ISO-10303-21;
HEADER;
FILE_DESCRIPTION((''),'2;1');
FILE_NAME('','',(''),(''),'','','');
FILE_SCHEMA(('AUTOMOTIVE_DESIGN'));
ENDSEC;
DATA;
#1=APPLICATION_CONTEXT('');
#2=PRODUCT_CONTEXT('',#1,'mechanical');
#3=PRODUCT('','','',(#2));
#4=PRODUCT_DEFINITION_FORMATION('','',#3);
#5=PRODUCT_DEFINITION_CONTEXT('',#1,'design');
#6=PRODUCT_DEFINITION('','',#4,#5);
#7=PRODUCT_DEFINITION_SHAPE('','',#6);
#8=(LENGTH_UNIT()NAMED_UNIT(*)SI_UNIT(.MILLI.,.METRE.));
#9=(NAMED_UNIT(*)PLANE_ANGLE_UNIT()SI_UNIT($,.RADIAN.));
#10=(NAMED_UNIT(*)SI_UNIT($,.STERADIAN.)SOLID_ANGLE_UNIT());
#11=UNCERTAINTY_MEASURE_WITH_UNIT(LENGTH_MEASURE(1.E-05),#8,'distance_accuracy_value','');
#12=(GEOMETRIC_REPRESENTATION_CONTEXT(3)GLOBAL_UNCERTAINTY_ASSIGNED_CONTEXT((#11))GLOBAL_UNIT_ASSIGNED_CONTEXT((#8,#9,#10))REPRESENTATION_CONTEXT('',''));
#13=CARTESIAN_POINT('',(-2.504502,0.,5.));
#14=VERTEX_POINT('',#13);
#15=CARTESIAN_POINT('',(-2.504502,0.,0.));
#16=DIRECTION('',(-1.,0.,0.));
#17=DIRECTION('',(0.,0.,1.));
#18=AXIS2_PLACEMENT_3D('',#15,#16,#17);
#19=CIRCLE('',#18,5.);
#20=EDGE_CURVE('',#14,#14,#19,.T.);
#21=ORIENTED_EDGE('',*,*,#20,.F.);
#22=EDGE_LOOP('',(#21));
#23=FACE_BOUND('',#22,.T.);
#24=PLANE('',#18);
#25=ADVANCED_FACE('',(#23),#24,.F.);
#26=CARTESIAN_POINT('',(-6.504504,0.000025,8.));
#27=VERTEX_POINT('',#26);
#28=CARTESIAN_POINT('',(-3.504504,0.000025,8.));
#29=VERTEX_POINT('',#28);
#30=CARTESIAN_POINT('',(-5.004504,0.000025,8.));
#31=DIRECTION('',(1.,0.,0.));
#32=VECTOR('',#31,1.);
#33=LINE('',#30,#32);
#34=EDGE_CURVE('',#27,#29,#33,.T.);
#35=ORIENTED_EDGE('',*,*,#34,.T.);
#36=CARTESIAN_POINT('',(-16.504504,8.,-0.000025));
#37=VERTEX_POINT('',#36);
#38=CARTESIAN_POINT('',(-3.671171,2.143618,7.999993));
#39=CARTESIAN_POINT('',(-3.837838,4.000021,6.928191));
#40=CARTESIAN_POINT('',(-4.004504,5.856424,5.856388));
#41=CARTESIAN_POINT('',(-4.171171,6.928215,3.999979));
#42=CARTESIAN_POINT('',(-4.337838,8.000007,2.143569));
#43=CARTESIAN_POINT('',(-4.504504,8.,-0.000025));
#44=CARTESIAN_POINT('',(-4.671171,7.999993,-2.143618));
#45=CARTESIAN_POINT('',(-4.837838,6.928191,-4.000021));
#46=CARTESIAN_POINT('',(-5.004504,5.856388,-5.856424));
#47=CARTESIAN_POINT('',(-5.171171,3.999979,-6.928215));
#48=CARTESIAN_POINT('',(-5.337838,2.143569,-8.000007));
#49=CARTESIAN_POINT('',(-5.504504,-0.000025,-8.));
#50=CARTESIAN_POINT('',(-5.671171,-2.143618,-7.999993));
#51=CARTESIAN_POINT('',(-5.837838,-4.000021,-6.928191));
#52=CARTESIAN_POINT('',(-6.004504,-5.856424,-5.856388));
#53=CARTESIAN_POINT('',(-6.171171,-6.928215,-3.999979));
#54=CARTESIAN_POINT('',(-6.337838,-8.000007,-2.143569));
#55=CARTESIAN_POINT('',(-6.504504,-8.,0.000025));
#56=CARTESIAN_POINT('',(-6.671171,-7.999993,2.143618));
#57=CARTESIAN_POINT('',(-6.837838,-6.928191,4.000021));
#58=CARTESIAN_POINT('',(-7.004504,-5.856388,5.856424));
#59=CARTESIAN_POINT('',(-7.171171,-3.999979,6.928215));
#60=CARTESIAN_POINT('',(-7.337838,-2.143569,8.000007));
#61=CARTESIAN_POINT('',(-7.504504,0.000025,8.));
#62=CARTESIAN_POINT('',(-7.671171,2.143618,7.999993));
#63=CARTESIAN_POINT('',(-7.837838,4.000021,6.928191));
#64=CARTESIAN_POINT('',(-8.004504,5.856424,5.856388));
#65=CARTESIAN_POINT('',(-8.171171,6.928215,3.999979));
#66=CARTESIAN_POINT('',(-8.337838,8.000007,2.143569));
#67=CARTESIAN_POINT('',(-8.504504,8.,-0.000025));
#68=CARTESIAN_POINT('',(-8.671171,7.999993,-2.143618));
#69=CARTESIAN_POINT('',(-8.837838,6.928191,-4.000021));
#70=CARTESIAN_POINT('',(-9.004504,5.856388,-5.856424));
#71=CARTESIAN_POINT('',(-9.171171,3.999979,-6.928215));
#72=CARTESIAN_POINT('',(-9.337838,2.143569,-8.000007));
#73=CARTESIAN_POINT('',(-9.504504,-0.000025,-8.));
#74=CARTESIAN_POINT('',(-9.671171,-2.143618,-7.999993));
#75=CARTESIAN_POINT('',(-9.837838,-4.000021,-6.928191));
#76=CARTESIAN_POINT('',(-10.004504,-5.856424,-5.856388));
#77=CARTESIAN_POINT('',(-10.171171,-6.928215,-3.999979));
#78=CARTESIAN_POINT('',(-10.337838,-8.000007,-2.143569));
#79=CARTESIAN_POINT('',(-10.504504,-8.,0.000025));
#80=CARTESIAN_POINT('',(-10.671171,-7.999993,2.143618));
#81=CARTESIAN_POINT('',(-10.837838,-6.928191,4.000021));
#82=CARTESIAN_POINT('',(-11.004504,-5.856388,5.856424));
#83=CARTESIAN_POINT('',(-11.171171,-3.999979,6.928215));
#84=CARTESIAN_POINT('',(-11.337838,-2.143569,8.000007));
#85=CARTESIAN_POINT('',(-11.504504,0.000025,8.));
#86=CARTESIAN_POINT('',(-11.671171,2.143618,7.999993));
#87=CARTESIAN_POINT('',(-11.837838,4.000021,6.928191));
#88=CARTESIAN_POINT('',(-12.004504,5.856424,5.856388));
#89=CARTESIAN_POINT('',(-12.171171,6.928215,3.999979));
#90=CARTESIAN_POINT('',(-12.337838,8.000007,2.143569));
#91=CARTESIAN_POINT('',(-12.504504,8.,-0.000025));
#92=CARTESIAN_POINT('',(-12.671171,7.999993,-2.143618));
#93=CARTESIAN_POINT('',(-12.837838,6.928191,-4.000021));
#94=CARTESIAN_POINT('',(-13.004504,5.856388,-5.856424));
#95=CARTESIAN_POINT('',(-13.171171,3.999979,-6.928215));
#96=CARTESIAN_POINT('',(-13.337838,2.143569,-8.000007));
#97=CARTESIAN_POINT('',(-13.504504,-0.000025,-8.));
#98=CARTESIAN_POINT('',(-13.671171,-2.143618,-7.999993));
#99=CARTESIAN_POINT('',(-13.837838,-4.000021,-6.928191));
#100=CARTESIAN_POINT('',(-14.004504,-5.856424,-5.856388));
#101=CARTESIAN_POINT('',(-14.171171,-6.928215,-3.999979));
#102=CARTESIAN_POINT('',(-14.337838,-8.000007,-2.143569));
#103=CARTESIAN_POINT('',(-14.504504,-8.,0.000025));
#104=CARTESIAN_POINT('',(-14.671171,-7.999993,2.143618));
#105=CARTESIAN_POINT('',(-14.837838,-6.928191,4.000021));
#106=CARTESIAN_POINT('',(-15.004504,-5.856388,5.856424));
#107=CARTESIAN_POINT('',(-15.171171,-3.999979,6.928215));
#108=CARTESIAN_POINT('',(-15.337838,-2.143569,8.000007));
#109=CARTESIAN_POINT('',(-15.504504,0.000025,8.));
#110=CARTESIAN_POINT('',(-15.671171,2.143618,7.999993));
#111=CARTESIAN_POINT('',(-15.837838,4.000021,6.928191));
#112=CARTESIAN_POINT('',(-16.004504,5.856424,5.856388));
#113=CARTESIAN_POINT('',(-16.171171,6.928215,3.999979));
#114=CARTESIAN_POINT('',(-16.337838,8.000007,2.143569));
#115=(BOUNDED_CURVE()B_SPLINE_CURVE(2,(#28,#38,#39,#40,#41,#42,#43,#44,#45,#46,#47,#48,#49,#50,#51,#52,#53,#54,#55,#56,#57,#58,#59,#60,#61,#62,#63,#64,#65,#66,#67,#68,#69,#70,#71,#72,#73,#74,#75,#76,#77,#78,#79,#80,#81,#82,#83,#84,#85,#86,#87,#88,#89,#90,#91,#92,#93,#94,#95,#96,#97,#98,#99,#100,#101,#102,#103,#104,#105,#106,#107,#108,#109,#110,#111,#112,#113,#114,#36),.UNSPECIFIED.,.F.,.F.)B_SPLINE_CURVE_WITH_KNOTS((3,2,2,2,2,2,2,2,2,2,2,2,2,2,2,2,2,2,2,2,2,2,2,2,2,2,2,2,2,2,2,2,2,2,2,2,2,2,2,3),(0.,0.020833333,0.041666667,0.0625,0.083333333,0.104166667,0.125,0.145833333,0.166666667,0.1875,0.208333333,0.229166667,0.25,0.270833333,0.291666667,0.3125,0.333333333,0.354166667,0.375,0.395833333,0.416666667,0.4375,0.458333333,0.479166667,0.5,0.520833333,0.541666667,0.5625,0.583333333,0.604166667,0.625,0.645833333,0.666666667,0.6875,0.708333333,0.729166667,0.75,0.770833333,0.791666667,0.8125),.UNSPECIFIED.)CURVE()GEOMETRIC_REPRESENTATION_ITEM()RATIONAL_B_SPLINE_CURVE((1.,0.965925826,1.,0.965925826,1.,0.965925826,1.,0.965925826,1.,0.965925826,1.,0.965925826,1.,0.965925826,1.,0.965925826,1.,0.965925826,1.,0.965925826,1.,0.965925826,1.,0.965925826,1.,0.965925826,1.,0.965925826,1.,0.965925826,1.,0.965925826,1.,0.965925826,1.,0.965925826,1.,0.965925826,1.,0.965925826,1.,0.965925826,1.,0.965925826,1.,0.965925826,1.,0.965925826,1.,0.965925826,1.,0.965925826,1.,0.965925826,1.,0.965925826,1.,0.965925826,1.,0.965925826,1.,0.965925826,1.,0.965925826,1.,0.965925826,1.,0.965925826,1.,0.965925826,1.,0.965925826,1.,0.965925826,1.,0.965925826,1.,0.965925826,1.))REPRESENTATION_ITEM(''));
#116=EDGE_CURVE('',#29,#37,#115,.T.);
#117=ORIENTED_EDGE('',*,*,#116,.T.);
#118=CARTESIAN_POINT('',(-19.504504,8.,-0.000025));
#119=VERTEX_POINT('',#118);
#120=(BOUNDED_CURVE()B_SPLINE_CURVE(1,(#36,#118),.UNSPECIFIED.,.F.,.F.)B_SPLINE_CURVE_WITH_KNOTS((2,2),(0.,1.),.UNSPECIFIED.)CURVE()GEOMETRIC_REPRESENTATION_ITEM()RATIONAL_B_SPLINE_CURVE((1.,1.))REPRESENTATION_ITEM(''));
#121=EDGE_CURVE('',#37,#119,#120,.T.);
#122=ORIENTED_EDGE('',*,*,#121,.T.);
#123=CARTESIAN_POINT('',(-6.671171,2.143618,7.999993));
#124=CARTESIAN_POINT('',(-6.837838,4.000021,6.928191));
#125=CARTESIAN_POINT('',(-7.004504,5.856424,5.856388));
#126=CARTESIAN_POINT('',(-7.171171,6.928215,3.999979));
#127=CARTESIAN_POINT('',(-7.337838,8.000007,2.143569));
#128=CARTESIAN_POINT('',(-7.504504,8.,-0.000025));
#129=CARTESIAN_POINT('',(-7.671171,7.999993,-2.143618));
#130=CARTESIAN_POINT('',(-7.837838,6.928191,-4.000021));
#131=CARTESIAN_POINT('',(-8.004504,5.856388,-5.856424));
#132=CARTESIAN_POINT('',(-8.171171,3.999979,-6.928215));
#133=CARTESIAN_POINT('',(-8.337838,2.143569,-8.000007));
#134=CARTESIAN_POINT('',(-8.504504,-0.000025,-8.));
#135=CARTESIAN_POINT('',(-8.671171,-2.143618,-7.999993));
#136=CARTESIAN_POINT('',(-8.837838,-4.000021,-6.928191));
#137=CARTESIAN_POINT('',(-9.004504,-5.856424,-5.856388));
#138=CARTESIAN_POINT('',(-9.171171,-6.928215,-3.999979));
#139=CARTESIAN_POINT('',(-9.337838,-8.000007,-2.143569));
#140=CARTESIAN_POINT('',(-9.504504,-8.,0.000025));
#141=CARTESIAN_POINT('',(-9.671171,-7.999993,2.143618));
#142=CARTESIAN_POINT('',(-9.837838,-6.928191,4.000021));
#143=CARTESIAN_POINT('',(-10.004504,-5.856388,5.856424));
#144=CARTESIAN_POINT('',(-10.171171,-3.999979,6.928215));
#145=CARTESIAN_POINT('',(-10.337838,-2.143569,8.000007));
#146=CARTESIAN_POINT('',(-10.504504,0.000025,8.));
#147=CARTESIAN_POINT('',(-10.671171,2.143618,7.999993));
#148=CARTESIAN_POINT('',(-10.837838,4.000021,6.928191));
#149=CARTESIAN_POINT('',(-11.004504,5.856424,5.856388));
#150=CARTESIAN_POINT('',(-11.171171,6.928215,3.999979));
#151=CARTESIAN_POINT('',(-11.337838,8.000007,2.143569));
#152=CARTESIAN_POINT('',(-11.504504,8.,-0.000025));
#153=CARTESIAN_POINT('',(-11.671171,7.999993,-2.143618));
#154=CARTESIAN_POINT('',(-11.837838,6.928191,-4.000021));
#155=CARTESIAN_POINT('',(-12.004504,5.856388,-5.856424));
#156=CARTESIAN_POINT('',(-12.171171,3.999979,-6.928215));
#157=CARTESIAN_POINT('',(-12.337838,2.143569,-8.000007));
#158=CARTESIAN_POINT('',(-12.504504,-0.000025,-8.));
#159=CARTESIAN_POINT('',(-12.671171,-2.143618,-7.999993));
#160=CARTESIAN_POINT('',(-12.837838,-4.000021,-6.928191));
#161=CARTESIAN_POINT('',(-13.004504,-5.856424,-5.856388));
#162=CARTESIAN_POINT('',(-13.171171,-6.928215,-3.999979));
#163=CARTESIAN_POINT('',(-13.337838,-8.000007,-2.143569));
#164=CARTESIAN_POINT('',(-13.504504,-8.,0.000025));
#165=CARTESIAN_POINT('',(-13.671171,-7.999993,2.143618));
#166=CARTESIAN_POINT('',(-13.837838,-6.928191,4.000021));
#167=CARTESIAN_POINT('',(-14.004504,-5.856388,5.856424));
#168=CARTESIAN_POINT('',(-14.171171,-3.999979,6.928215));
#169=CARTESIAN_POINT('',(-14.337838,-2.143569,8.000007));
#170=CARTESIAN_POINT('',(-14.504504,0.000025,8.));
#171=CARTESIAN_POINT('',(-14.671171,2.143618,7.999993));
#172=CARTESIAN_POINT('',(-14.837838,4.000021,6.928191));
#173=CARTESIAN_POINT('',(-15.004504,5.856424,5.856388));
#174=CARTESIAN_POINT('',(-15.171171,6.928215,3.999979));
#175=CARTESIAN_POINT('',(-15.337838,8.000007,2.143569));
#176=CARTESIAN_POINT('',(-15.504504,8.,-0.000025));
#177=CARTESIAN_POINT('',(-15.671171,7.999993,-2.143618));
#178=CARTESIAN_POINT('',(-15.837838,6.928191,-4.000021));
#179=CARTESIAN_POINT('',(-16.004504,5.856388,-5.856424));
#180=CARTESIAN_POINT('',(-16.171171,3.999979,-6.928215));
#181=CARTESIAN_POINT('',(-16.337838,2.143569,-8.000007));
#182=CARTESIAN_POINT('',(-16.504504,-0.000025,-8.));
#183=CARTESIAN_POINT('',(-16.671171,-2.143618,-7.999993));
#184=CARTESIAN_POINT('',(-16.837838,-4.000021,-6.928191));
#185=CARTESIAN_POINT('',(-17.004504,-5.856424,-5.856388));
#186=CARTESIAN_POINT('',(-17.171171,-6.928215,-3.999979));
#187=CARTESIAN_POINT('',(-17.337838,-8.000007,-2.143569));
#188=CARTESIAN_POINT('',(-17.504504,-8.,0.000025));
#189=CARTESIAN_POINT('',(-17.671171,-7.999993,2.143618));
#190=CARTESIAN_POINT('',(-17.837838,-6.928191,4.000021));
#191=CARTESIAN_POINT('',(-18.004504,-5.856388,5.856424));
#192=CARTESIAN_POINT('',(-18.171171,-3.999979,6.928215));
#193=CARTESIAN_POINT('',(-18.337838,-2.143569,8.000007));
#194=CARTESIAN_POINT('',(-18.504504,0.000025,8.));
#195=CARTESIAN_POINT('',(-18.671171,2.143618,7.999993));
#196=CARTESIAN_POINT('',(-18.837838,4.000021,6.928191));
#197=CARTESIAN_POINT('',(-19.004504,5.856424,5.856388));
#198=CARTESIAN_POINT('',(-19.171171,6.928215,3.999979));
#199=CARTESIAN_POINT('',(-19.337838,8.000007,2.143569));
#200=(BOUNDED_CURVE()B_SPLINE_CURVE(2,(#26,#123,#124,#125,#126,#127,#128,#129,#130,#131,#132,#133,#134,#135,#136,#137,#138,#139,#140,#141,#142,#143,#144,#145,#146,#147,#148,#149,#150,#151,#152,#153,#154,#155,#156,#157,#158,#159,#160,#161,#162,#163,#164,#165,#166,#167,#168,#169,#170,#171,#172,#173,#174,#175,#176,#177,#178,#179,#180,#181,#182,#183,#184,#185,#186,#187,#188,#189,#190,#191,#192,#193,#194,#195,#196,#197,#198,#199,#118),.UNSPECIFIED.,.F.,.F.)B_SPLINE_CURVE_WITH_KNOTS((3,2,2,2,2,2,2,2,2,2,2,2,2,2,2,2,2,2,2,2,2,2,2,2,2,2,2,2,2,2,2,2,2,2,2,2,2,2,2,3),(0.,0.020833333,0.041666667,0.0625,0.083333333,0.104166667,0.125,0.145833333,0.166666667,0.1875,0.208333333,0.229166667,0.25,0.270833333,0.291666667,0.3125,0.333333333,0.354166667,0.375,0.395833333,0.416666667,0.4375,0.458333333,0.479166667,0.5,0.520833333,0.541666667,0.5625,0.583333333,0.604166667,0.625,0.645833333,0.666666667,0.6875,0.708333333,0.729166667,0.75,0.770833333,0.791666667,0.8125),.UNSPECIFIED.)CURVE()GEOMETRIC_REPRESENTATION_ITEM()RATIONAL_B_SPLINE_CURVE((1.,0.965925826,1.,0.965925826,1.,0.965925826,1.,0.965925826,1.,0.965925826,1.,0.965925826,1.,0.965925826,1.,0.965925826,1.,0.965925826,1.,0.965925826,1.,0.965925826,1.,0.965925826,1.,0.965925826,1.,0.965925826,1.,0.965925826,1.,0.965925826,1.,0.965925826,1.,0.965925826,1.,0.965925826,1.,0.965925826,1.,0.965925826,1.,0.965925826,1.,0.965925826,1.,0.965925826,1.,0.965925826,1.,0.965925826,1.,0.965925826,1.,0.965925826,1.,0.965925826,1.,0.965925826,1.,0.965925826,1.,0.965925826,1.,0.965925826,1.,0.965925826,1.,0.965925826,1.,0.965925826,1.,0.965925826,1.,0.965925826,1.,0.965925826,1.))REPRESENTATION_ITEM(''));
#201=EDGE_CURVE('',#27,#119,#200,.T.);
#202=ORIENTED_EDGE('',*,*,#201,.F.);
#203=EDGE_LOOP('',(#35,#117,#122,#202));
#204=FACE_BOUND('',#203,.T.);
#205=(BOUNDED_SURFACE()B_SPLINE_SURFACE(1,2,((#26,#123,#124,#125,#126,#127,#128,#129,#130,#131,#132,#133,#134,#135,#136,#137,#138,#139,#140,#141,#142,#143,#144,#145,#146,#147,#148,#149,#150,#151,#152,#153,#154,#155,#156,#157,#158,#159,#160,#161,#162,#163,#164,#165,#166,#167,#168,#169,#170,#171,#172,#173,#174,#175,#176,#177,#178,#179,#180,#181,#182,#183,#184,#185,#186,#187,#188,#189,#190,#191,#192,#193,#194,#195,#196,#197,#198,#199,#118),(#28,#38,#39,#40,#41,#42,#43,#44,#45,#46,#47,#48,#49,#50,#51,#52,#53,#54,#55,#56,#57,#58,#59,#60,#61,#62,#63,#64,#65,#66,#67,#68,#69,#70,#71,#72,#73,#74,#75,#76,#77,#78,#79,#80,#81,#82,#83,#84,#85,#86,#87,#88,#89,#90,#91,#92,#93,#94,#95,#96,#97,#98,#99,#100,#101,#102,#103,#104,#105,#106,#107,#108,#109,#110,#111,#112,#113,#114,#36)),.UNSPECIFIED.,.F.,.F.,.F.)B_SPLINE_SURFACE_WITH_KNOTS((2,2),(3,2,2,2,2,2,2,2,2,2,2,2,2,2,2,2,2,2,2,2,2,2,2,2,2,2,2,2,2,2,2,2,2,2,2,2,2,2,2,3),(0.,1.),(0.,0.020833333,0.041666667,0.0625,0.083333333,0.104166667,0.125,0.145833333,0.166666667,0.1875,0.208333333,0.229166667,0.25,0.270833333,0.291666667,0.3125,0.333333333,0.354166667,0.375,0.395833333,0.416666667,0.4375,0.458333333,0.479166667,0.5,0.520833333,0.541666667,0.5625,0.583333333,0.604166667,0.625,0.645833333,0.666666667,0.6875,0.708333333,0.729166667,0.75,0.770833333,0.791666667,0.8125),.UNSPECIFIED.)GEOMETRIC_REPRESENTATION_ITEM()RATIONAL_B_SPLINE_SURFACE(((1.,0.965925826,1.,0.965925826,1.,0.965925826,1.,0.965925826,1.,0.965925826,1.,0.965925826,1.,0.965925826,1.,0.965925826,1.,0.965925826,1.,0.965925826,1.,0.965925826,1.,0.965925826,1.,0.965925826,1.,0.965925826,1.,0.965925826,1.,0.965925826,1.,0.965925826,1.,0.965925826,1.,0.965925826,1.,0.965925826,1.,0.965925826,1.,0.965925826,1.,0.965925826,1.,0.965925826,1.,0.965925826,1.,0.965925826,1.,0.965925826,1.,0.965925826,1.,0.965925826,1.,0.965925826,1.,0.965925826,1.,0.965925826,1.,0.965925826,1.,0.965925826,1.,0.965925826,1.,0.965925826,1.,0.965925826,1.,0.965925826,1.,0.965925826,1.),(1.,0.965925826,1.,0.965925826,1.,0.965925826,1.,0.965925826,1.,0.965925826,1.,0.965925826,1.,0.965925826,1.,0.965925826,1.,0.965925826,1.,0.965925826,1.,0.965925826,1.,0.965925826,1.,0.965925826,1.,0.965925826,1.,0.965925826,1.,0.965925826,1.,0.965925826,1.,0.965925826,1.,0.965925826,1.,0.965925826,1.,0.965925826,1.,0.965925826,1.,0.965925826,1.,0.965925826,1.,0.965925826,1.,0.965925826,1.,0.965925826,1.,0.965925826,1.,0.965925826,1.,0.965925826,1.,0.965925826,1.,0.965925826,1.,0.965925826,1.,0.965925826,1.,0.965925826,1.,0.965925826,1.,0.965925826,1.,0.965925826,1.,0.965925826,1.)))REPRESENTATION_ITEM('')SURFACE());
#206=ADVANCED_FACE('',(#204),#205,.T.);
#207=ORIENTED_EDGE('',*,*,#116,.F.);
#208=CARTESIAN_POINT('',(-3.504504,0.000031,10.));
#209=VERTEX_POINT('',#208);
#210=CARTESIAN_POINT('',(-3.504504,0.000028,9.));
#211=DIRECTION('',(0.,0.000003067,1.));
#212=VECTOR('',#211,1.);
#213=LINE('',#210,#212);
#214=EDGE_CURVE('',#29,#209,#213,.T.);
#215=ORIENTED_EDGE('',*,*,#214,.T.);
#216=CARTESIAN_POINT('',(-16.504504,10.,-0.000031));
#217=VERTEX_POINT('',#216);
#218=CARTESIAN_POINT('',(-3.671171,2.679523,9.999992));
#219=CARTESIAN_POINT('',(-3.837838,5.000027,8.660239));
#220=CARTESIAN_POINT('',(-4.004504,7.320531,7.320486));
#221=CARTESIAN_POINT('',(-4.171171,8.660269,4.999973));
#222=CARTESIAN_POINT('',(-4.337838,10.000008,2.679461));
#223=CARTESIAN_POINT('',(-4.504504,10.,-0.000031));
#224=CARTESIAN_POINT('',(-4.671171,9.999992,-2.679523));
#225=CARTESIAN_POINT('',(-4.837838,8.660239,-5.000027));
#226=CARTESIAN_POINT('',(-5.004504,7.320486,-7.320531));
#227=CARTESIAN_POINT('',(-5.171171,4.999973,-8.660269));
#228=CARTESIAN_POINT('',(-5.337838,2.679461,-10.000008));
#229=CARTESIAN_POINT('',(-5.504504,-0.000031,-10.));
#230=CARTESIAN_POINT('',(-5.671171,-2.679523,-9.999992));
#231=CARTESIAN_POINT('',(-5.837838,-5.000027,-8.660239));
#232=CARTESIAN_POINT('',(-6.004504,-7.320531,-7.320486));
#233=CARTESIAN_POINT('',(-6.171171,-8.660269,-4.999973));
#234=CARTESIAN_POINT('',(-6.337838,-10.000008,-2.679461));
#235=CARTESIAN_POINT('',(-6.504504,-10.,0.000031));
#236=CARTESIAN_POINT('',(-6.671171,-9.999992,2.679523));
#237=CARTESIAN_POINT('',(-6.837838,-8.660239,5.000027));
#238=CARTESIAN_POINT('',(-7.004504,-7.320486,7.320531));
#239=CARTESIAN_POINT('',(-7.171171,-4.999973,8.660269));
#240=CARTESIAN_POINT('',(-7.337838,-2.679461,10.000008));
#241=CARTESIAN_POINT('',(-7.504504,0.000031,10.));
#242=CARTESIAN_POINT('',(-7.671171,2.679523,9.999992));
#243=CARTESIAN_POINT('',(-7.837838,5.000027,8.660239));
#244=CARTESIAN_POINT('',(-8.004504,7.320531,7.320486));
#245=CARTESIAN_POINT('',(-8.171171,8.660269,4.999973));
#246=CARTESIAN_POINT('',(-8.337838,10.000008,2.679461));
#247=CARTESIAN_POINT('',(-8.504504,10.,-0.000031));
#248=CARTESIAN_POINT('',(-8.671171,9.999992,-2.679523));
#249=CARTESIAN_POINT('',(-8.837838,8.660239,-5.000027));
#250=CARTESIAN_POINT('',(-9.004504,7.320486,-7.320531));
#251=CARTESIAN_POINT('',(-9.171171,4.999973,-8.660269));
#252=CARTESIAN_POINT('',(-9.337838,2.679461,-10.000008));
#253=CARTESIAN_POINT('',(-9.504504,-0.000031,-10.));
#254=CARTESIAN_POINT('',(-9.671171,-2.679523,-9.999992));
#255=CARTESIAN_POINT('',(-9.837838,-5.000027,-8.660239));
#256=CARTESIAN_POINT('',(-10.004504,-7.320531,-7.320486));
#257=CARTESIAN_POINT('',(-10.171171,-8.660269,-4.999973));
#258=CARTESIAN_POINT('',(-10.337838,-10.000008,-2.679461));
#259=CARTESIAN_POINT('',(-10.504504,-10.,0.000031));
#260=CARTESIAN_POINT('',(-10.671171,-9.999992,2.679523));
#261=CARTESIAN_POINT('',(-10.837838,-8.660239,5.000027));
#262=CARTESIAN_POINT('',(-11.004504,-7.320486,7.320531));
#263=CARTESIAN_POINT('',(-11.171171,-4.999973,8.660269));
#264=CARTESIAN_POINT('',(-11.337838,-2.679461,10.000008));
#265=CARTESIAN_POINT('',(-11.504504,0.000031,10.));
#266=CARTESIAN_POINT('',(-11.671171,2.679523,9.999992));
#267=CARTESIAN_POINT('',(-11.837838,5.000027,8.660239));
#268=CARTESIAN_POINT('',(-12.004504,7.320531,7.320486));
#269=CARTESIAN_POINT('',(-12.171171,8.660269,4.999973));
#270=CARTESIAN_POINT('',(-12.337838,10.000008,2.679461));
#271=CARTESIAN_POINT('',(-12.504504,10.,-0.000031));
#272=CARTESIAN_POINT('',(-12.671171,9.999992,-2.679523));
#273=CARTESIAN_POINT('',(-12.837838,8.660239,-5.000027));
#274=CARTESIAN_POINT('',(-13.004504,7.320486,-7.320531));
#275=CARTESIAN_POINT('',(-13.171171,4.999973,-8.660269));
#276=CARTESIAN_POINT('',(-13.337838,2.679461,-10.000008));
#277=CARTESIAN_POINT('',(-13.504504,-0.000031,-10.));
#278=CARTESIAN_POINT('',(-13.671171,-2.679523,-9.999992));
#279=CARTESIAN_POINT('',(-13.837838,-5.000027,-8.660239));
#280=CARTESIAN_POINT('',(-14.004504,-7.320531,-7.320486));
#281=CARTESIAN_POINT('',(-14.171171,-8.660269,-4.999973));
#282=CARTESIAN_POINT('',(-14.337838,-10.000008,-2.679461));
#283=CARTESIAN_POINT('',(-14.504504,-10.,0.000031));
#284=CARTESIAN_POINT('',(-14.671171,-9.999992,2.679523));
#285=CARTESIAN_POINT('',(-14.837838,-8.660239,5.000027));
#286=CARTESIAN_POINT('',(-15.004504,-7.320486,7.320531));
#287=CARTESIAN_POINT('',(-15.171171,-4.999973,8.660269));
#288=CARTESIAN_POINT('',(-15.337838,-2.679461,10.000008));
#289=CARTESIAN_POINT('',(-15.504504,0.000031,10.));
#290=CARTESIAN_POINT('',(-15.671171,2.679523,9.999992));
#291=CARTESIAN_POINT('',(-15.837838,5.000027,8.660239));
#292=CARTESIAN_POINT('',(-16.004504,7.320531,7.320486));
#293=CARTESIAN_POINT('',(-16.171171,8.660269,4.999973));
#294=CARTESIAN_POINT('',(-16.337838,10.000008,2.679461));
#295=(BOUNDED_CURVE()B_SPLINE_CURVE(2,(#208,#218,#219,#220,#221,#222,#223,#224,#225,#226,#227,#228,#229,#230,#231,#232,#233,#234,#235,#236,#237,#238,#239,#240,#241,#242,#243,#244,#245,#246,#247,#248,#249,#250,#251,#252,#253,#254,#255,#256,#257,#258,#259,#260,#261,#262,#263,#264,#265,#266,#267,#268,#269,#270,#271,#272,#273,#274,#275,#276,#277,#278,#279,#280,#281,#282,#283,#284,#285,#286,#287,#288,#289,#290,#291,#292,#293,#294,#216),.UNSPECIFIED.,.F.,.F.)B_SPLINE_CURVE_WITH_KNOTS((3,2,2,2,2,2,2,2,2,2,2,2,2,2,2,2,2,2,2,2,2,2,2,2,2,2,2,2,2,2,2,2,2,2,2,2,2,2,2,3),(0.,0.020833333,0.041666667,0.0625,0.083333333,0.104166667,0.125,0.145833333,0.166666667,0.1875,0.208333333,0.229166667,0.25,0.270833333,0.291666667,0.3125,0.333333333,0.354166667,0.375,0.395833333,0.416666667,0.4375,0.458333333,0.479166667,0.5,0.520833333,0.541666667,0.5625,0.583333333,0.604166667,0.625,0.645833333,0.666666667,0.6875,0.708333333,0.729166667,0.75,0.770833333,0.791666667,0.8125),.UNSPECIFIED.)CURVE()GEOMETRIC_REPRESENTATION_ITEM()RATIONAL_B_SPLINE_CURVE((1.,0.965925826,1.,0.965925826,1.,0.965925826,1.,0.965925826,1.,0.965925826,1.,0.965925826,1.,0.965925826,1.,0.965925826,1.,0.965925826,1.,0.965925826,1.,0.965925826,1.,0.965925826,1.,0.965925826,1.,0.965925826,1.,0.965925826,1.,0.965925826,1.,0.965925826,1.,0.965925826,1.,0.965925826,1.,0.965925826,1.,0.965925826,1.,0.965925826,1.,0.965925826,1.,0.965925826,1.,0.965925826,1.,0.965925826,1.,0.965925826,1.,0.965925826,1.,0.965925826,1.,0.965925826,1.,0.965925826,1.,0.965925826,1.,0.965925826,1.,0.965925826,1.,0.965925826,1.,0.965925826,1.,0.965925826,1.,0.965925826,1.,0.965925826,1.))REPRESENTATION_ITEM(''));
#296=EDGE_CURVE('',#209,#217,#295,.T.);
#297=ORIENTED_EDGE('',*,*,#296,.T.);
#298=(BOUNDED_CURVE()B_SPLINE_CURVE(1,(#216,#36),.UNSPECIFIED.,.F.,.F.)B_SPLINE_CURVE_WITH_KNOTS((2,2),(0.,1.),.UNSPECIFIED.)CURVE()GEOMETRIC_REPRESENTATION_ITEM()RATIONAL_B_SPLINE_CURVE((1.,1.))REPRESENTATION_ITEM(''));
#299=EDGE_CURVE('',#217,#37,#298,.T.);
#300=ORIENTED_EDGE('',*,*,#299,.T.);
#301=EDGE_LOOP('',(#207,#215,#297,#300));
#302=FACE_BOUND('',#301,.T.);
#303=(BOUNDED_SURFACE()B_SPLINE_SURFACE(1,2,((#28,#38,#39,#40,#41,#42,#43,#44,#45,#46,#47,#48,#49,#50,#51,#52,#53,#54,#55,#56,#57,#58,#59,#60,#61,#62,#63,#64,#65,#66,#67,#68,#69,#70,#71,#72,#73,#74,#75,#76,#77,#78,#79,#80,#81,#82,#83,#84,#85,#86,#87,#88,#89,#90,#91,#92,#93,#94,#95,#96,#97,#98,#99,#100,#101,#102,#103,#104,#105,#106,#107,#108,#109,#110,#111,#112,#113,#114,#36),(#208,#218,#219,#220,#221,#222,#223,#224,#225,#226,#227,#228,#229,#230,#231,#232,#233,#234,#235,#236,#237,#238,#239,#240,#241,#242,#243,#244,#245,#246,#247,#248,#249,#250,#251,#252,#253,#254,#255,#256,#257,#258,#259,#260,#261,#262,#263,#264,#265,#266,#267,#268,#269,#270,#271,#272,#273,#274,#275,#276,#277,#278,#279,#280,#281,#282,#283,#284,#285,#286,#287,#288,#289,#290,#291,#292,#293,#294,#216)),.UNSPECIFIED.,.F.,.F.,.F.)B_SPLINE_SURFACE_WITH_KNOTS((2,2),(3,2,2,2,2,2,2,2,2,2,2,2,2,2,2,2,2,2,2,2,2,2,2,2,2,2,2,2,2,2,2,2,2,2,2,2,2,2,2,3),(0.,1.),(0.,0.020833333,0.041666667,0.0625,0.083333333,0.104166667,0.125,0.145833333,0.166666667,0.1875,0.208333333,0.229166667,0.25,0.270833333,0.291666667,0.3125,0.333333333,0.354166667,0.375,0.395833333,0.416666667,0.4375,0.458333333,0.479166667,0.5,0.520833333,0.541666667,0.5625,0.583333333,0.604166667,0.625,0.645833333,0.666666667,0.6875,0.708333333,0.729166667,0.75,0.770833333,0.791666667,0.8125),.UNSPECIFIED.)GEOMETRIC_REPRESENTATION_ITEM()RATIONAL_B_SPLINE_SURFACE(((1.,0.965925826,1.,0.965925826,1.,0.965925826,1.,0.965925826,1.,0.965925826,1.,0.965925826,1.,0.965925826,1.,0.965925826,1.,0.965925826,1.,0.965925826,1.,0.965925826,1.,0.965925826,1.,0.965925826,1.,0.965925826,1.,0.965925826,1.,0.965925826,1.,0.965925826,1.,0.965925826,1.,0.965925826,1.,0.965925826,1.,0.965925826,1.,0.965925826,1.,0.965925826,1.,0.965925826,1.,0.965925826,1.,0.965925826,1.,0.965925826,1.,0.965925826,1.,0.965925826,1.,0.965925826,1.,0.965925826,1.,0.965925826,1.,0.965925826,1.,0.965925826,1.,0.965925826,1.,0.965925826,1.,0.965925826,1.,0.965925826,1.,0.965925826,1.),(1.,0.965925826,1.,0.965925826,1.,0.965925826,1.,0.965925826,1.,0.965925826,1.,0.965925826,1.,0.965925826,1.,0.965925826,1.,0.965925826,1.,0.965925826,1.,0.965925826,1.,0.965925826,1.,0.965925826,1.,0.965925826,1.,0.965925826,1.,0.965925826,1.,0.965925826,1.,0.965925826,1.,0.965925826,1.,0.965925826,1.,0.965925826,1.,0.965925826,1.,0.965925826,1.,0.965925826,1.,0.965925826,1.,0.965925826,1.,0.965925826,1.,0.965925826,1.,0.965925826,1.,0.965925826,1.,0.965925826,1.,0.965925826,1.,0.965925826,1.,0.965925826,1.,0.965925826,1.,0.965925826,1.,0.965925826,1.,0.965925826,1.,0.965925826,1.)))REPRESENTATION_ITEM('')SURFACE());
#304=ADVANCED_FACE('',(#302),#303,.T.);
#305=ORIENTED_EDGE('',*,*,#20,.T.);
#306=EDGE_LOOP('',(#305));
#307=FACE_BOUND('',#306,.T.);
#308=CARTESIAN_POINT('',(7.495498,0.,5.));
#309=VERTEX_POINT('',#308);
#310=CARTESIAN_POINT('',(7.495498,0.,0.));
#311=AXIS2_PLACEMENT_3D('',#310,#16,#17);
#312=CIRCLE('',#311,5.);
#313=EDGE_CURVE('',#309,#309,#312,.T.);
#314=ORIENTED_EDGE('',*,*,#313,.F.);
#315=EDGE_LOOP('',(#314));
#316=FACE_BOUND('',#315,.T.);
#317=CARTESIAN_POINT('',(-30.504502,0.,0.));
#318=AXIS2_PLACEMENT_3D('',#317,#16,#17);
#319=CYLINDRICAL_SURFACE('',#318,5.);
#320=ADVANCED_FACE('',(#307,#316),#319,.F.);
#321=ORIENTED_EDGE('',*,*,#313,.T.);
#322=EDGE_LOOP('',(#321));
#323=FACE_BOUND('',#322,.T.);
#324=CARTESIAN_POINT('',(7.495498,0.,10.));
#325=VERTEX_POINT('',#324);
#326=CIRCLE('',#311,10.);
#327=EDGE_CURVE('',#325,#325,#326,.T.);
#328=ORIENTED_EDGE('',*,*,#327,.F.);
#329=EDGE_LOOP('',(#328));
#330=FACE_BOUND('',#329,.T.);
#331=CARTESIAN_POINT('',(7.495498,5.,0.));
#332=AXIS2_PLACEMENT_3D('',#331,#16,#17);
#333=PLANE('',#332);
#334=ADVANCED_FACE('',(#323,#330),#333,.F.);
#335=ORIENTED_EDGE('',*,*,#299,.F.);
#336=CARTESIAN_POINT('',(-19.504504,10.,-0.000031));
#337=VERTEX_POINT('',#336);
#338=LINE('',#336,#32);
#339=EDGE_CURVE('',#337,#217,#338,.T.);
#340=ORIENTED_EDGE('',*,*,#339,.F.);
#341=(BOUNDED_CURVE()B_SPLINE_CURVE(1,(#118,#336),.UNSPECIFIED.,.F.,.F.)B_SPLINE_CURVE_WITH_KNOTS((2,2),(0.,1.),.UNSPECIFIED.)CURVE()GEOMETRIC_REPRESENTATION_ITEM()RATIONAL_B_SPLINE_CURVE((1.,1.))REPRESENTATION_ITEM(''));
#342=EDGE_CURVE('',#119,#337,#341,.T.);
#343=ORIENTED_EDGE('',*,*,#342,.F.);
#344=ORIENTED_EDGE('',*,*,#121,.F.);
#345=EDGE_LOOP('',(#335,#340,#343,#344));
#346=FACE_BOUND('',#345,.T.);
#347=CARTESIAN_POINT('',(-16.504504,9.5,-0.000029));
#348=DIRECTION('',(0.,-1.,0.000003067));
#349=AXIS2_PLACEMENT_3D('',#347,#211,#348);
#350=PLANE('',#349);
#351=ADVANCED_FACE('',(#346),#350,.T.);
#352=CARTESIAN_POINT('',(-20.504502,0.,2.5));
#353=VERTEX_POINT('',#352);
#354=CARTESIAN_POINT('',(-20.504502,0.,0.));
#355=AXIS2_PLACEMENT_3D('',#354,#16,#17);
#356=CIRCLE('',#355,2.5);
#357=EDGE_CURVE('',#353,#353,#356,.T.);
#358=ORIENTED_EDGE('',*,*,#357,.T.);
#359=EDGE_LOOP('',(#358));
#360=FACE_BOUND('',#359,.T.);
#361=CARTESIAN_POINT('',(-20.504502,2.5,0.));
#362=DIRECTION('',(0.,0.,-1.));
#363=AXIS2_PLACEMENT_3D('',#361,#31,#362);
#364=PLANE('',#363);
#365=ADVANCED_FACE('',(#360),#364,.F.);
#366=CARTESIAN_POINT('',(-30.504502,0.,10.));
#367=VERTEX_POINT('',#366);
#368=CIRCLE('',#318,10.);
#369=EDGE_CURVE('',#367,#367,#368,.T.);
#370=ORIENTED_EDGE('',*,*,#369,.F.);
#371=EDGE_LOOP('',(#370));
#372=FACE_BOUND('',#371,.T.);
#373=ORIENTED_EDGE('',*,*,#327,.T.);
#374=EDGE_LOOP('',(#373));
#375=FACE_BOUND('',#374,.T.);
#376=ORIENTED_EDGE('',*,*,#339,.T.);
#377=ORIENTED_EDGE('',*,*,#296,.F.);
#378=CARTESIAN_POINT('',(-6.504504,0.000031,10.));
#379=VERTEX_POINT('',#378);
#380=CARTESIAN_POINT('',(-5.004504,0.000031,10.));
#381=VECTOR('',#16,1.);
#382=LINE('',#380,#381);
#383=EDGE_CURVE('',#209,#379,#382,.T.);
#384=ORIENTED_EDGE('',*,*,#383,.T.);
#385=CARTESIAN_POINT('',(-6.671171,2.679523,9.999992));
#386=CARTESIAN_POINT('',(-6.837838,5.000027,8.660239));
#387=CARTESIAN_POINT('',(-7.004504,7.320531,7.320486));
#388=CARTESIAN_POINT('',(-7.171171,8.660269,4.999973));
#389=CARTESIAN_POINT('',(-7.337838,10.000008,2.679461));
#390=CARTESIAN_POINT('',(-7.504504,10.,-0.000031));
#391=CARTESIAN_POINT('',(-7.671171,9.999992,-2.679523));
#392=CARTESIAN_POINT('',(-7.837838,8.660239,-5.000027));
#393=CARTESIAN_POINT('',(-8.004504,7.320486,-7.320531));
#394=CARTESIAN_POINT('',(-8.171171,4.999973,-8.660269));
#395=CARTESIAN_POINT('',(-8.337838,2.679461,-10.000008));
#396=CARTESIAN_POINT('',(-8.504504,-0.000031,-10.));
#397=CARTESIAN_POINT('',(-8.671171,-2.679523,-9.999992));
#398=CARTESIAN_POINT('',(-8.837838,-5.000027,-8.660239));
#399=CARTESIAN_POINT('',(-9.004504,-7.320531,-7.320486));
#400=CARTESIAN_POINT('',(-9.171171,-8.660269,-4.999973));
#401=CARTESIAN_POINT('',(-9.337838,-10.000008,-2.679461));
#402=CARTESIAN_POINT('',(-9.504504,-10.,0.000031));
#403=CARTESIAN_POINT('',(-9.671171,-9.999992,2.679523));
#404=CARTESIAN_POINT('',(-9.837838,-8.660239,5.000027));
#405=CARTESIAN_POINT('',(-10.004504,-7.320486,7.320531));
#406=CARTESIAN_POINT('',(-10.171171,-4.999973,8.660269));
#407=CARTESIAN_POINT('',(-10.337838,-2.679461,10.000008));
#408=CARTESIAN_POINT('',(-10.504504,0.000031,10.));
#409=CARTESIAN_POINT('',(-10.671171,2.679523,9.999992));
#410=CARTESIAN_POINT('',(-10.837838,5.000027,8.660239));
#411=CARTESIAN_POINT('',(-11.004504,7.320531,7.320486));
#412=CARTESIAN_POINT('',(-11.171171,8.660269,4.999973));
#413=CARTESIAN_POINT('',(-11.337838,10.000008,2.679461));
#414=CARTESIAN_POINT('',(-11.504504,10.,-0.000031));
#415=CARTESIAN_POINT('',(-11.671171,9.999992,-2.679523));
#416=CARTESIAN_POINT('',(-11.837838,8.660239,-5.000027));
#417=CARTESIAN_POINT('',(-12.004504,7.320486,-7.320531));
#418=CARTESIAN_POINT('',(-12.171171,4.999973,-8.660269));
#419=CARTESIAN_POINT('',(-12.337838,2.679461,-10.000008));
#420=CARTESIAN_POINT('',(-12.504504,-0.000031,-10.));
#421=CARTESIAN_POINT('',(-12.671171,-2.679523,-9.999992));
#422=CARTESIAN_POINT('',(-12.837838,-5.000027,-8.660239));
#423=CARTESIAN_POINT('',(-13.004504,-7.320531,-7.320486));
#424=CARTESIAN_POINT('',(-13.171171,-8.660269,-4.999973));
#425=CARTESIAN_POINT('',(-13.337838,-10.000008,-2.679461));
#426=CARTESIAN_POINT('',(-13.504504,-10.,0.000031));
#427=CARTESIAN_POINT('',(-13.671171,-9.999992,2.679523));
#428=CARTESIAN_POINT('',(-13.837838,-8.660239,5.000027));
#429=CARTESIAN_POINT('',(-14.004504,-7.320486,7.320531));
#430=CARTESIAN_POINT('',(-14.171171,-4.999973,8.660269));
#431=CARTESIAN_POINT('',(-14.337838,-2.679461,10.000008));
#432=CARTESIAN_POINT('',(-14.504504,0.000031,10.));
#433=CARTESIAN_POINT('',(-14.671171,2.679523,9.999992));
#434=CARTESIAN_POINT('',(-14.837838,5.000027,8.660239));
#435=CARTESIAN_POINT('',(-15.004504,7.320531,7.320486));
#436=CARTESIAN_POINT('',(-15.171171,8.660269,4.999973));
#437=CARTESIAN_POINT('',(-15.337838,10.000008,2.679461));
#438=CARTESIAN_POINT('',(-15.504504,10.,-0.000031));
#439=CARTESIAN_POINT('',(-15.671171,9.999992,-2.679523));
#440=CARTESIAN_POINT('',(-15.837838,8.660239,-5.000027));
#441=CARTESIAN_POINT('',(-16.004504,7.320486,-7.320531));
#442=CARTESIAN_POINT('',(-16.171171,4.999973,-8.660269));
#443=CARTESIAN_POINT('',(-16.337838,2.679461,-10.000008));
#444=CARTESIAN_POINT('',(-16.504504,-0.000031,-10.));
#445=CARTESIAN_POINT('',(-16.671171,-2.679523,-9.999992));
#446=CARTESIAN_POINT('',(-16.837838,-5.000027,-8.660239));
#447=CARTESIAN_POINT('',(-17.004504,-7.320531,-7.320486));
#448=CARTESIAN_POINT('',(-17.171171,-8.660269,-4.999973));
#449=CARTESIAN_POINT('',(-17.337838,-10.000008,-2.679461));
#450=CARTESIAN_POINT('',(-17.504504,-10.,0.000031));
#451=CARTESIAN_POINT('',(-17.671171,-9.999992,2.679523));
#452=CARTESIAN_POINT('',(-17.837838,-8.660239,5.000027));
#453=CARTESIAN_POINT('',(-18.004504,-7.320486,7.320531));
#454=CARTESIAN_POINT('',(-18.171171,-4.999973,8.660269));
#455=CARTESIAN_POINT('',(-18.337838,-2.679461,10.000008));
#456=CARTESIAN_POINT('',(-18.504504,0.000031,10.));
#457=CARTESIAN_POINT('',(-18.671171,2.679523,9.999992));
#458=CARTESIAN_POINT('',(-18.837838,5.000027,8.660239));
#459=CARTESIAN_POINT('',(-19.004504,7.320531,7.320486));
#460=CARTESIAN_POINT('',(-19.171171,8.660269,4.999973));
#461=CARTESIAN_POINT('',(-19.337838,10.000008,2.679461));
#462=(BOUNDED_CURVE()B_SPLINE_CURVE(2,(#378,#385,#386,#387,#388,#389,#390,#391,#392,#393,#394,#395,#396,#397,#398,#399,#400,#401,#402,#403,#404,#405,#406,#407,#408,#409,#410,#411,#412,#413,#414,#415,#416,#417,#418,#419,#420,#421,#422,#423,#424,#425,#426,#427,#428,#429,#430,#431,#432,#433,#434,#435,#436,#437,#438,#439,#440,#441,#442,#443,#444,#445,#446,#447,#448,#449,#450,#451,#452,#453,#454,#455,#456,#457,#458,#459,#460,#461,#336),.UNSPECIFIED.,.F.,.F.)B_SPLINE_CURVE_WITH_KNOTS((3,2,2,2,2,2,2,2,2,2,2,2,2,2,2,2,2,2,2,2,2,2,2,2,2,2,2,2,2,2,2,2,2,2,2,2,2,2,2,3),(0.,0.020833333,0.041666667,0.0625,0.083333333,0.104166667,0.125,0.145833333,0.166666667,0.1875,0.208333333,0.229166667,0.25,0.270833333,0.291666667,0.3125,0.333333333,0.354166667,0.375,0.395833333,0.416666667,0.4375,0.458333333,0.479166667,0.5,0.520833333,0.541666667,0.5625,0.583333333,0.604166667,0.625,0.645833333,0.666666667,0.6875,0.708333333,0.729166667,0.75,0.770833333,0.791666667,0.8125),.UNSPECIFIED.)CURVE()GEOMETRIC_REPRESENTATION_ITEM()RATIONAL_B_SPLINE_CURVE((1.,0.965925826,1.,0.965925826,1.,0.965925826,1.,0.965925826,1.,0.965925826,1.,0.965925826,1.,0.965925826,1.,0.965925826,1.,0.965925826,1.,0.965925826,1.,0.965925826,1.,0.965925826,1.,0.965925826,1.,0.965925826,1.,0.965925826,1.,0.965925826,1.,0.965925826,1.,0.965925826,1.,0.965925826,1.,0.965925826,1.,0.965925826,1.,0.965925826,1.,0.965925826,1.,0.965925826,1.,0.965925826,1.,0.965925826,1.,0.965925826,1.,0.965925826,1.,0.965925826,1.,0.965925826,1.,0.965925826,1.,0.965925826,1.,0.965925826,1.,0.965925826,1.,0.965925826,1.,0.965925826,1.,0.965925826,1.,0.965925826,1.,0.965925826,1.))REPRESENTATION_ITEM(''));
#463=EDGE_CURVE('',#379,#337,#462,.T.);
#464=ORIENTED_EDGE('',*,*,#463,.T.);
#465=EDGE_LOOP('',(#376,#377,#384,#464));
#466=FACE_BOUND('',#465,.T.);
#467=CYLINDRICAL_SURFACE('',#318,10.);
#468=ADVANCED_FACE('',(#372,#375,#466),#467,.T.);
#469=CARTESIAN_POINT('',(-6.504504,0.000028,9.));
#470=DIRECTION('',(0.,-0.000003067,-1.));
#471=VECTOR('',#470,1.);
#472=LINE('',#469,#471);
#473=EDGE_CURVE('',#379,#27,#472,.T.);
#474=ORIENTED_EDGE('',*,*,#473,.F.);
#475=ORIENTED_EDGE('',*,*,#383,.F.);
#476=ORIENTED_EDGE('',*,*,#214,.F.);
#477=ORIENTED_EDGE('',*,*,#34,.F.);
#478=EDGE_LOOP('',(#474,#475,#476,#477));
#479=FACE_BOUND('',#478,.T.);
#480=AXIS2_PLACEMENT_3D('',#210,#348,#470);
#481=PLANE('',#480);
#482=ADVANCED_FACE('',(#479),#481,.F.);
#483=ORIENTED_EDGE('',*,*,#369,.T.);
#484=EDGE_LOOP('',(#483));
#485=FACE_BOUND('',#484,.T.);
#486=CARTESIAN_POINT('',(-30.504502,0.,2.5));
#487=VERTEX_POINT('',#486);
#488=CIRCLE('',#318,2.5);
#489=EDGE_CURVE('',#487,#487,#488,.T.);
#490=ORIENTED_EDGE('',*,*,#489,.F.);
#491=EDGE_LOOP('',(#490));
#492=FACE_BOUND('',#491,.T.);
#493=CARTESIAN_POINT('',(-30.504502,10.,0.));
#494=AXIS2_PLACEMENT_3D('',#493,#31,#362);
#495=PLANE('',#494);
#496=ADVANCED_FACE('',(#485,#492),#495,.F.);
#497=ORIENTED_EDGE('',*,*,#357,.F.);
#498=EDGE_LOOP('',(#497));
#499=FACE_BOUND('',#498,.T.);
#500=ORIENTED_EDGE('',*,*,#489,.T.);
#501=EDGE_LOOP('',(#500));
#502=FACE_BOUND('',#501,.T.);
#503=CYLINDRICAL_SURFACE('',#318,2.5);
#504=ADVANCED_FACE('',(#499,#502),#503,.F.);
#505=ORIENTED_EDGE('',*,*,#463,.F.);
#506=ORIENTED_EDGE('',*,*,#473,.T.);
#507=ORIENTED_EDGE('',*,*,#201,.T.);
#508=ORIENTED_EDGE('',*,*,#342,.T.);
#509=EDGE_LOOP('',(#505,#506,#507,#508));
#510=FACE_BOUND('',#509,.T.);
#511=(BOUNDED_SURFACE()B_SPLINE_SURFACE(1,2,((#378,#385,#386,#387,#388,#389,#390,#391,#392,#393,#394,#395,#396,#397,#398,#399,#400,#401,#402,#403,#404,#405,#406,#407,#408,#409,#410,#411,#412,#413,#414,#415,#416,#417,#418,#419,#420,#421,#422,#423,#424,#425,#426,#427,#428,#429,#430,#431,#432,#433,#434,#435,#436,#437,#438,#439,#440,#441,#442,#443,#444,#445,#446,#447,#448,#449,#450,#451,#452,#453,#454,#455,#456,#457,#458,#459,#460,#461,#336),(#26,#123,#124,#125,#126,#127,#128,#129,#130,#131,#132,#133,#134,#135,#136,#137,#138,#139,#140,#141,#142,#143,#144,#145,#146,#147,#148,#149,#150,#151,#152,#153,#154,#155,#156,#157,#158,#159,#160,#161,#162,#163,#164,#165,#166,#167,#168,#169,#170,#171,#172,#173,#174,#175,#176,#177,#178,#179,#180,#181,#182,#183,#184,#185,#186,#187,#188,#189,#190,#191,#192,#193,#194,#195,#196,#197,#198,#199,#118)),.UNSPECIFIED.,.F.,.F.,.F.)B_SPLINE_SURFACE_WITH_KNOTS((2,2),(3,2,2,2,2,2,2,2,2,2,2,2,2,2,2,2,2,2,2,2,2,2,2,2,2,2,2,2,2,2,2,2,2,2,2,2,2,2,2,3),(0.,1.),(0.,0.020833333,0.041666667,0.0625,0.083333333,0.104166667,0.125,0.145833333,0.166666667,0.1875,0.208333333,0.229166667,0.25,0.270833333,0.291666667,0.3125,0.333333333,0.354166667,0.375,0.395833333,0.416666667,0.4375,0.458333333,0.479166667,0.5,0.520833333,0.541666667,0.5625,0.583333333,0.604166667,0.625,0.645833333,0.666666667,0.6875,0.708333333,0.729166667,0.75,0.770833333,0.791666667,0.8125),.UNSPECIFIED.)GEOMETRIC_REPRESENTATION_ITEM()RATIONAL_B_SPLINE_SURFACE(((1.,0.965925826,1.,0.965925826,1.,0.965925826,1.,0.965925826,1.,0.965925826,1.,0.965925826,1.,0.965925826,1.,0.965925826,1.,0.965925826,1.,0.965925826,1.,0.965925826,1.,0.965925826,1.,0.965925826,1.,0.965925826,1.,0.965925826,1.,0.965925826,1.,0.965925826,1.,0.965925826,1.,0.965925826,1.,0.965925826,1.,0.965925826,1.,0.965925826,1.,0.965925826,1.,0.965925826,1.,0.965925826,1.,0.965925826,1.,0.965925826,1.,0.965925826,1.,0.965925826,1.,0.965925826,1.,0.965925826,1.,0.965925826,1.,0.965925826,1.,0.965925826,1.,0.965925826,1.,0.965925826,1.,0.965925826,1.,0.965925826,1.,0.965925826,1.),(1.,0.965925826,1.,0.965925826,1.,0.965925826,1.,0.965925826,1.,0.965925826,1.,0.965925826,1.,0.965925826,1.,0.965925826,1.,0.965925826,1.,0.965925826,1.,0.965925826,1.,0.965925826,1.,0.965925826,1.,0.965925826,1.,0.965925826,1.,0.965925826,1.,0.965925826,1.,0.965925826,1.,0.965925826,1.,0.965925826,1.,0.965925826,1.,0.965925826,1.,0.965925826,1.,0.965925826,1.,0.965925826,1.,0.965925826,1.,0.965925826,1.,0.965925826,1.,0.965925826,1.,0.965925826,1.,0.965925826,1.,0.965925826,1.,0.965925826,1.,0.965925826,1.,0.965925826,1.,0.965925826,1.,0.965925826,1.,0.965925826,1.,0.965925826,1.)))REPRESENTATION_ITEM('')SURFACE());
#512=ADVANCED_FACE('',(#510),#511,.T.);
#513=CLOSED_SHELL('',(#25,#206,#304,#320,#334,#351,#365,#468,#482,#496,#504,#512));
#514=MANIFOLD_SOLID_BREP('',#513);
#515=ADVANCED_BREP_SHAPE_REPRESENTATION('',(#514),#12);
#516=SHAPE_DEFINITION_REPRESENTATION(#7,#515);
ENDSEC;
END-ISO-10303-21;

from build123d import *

# Parameters (mm, degrees)
CUT_SWEEP1_PITCH = 4


with BuildPart() as part:
    # Sketch1 → Revolve1 (revolve)
    with BuildSketch(Plane.XY, mode=Mode.PRIVATE) as revolve1_sk:
        Polygon((7.495497647, 5), (7.495497647, 10), (-30.504502353, 10), (-30.504502353, 2.5), (-20.504502353, 2.5), (-20.504502353, 0), (-2.504502353, 0), (-2.504502353, 5), align=None)
    revolve(revolve1_sk.sketch.rotate(Axis((-30.504502353, 0, 0), (1, 0, 0)), 90), axis=Axis((-30.504502353, 0, 0), (1, 0, 0)))

    # Cut-Sweep1: arcs per turn and ends read off the stored shape
    # Cut-Sweep1: the profile of Sketch2 profile screwed along a right-hand helix through 3.25 turns, 12 arcs to a turn; built about Z, then put on its axis
    cut_sweep1_z = Axis((0, 0, 0), (0, 0, 1))
    cut_sweep1_corners = [(10.0003, 3.1417e-05, -7.495495647), (10.0003, 3.1417e-05, -10.495495647), (8, 2.5133e-05, -10.495495647), (8, 2.5133e-05, -7.495495647)]
    with BuildLine(mode=Mode.PRIVATE) as cut_sweep1_profile:
        Line(cut_sweep1_corners[0], cut_sweep1_corners[1])
        Line(cut_sweep1_corners[1], cut_sweep1_corners[2])
        Line(cut_sweep1_corners[2], cut_sweep1_corners[3])
        Line(cut_sweep1_corners[3], cut_sweep1_corners[0])
    cut_sweep1_cap = Face(cut_sweep1_profile.wire())
    cut_sweep1_turn_angles = [0, 15, 30, 45, 60, 75, 90, 105, 120, 135, 150, 165, 180, 195, 210, 225, 240, 255, 270, 285, 300, 315, 330, 345, 360]
    cut_sweep1_turn_weights = [1, 0.9659258262890683, 1, 0.9659258262890683, 1, 0.9659258262890683, 1, 0.9659258262890683, 1, 0.9659258262890683, 1, 0.9659258262890683, 1, 0.9659258262890683, 1, 0.9659258262890683, 1, 0.9659258262890683, 1, 0.9659258262890683, 1, 0.9659258262890683, 1, 0.9659258262890683, 1]
    cut_sweep1_turn_rails = [Edge.make_bspline([Vector(p[0], p[1], 0).rotate(cut_sweep1_z, cut_sweep1_turn_angles[k]) / cut_sweep1_turn_weights[k] + Vector(0, 0, p[2] + CUT_SWEEP1_PITCH * cut_sweep1_turn_angles[k] / 360) for k in range(25)], [0, 0, 0, 1, 1, 2, 2, 3, 3, 4, 4, 5, 5, 6, 6, 7, 7, 8, 8, 9, 9, 10, 10, 11, 11, 12, 12, 12], 2, cut_sweep1_turn_weights) for p in cut_sweep1_corners]
    cut_sweep1_turn_sides = [Face.make_surface_from_curves(cut_sweep1_turn_rails[p[0]], cut_sweep1_turn_rails[p[1]]) for p in [(0, 1), (1, 2), (2, 3), (3, 0)]]
    cut_sweep1_last_angles = [1080, 1095, 1110, 1125, 1140, 1155, 1170]
    cut_sweep1_last_weights = [1, 0.9659258262890683, 1, 0.9659258262890683, 1, 0.9659258262890646, 1]
    cut_sweep1_last_rails = [Edge.make_bspline([Vector(p[0], p[1], 0).rotate(cut_sweep1_z, cut_sweep1_last_angles[k]) / cut_sweep1_last_weights[k] + Vector(0, 0, p[2] + CUT_SWEEP1_PITCH * cut_sweep1_last_angles[k] / 360) for k in range(7)], [0, 0, 0, 1, 1, 2, 2, 3, 3, 3], 2, cut_sweep1_last_weights) for p in cut_sweep1_corners]
    cut_sweep1_last_sides = [Face.make_surface_from_curves(cut_sweep1_last_rails[p[0]], cut_sweep1_last_rails[p[1]]) for p in [(0, 1), (1, 2), (2, 3), (3, 0)]]
    cut_sweep1 = Plane(origin=(-14, 0, 0), x_dir=(0, 0, 1), z_dir=(-1, 0, 0)) * Solid(Shell([*[p.moved(Location((0, 0, CUT_SWEEP1_PITCH * i))) for i in range(3) for p in cut_sweep1_turn_sides], *cut_sweep1_last_sides, cut_sweep1_cap, cut_sweep1_cap.rotate(cut_sweep1_z, 1170).moved(Location((0, 0, CUT_SWEEP1_PITCH * 1170 / 360)))]))
    add(cut_sweep1, mode=Mode.SUBTRACT)


solid = part.part
